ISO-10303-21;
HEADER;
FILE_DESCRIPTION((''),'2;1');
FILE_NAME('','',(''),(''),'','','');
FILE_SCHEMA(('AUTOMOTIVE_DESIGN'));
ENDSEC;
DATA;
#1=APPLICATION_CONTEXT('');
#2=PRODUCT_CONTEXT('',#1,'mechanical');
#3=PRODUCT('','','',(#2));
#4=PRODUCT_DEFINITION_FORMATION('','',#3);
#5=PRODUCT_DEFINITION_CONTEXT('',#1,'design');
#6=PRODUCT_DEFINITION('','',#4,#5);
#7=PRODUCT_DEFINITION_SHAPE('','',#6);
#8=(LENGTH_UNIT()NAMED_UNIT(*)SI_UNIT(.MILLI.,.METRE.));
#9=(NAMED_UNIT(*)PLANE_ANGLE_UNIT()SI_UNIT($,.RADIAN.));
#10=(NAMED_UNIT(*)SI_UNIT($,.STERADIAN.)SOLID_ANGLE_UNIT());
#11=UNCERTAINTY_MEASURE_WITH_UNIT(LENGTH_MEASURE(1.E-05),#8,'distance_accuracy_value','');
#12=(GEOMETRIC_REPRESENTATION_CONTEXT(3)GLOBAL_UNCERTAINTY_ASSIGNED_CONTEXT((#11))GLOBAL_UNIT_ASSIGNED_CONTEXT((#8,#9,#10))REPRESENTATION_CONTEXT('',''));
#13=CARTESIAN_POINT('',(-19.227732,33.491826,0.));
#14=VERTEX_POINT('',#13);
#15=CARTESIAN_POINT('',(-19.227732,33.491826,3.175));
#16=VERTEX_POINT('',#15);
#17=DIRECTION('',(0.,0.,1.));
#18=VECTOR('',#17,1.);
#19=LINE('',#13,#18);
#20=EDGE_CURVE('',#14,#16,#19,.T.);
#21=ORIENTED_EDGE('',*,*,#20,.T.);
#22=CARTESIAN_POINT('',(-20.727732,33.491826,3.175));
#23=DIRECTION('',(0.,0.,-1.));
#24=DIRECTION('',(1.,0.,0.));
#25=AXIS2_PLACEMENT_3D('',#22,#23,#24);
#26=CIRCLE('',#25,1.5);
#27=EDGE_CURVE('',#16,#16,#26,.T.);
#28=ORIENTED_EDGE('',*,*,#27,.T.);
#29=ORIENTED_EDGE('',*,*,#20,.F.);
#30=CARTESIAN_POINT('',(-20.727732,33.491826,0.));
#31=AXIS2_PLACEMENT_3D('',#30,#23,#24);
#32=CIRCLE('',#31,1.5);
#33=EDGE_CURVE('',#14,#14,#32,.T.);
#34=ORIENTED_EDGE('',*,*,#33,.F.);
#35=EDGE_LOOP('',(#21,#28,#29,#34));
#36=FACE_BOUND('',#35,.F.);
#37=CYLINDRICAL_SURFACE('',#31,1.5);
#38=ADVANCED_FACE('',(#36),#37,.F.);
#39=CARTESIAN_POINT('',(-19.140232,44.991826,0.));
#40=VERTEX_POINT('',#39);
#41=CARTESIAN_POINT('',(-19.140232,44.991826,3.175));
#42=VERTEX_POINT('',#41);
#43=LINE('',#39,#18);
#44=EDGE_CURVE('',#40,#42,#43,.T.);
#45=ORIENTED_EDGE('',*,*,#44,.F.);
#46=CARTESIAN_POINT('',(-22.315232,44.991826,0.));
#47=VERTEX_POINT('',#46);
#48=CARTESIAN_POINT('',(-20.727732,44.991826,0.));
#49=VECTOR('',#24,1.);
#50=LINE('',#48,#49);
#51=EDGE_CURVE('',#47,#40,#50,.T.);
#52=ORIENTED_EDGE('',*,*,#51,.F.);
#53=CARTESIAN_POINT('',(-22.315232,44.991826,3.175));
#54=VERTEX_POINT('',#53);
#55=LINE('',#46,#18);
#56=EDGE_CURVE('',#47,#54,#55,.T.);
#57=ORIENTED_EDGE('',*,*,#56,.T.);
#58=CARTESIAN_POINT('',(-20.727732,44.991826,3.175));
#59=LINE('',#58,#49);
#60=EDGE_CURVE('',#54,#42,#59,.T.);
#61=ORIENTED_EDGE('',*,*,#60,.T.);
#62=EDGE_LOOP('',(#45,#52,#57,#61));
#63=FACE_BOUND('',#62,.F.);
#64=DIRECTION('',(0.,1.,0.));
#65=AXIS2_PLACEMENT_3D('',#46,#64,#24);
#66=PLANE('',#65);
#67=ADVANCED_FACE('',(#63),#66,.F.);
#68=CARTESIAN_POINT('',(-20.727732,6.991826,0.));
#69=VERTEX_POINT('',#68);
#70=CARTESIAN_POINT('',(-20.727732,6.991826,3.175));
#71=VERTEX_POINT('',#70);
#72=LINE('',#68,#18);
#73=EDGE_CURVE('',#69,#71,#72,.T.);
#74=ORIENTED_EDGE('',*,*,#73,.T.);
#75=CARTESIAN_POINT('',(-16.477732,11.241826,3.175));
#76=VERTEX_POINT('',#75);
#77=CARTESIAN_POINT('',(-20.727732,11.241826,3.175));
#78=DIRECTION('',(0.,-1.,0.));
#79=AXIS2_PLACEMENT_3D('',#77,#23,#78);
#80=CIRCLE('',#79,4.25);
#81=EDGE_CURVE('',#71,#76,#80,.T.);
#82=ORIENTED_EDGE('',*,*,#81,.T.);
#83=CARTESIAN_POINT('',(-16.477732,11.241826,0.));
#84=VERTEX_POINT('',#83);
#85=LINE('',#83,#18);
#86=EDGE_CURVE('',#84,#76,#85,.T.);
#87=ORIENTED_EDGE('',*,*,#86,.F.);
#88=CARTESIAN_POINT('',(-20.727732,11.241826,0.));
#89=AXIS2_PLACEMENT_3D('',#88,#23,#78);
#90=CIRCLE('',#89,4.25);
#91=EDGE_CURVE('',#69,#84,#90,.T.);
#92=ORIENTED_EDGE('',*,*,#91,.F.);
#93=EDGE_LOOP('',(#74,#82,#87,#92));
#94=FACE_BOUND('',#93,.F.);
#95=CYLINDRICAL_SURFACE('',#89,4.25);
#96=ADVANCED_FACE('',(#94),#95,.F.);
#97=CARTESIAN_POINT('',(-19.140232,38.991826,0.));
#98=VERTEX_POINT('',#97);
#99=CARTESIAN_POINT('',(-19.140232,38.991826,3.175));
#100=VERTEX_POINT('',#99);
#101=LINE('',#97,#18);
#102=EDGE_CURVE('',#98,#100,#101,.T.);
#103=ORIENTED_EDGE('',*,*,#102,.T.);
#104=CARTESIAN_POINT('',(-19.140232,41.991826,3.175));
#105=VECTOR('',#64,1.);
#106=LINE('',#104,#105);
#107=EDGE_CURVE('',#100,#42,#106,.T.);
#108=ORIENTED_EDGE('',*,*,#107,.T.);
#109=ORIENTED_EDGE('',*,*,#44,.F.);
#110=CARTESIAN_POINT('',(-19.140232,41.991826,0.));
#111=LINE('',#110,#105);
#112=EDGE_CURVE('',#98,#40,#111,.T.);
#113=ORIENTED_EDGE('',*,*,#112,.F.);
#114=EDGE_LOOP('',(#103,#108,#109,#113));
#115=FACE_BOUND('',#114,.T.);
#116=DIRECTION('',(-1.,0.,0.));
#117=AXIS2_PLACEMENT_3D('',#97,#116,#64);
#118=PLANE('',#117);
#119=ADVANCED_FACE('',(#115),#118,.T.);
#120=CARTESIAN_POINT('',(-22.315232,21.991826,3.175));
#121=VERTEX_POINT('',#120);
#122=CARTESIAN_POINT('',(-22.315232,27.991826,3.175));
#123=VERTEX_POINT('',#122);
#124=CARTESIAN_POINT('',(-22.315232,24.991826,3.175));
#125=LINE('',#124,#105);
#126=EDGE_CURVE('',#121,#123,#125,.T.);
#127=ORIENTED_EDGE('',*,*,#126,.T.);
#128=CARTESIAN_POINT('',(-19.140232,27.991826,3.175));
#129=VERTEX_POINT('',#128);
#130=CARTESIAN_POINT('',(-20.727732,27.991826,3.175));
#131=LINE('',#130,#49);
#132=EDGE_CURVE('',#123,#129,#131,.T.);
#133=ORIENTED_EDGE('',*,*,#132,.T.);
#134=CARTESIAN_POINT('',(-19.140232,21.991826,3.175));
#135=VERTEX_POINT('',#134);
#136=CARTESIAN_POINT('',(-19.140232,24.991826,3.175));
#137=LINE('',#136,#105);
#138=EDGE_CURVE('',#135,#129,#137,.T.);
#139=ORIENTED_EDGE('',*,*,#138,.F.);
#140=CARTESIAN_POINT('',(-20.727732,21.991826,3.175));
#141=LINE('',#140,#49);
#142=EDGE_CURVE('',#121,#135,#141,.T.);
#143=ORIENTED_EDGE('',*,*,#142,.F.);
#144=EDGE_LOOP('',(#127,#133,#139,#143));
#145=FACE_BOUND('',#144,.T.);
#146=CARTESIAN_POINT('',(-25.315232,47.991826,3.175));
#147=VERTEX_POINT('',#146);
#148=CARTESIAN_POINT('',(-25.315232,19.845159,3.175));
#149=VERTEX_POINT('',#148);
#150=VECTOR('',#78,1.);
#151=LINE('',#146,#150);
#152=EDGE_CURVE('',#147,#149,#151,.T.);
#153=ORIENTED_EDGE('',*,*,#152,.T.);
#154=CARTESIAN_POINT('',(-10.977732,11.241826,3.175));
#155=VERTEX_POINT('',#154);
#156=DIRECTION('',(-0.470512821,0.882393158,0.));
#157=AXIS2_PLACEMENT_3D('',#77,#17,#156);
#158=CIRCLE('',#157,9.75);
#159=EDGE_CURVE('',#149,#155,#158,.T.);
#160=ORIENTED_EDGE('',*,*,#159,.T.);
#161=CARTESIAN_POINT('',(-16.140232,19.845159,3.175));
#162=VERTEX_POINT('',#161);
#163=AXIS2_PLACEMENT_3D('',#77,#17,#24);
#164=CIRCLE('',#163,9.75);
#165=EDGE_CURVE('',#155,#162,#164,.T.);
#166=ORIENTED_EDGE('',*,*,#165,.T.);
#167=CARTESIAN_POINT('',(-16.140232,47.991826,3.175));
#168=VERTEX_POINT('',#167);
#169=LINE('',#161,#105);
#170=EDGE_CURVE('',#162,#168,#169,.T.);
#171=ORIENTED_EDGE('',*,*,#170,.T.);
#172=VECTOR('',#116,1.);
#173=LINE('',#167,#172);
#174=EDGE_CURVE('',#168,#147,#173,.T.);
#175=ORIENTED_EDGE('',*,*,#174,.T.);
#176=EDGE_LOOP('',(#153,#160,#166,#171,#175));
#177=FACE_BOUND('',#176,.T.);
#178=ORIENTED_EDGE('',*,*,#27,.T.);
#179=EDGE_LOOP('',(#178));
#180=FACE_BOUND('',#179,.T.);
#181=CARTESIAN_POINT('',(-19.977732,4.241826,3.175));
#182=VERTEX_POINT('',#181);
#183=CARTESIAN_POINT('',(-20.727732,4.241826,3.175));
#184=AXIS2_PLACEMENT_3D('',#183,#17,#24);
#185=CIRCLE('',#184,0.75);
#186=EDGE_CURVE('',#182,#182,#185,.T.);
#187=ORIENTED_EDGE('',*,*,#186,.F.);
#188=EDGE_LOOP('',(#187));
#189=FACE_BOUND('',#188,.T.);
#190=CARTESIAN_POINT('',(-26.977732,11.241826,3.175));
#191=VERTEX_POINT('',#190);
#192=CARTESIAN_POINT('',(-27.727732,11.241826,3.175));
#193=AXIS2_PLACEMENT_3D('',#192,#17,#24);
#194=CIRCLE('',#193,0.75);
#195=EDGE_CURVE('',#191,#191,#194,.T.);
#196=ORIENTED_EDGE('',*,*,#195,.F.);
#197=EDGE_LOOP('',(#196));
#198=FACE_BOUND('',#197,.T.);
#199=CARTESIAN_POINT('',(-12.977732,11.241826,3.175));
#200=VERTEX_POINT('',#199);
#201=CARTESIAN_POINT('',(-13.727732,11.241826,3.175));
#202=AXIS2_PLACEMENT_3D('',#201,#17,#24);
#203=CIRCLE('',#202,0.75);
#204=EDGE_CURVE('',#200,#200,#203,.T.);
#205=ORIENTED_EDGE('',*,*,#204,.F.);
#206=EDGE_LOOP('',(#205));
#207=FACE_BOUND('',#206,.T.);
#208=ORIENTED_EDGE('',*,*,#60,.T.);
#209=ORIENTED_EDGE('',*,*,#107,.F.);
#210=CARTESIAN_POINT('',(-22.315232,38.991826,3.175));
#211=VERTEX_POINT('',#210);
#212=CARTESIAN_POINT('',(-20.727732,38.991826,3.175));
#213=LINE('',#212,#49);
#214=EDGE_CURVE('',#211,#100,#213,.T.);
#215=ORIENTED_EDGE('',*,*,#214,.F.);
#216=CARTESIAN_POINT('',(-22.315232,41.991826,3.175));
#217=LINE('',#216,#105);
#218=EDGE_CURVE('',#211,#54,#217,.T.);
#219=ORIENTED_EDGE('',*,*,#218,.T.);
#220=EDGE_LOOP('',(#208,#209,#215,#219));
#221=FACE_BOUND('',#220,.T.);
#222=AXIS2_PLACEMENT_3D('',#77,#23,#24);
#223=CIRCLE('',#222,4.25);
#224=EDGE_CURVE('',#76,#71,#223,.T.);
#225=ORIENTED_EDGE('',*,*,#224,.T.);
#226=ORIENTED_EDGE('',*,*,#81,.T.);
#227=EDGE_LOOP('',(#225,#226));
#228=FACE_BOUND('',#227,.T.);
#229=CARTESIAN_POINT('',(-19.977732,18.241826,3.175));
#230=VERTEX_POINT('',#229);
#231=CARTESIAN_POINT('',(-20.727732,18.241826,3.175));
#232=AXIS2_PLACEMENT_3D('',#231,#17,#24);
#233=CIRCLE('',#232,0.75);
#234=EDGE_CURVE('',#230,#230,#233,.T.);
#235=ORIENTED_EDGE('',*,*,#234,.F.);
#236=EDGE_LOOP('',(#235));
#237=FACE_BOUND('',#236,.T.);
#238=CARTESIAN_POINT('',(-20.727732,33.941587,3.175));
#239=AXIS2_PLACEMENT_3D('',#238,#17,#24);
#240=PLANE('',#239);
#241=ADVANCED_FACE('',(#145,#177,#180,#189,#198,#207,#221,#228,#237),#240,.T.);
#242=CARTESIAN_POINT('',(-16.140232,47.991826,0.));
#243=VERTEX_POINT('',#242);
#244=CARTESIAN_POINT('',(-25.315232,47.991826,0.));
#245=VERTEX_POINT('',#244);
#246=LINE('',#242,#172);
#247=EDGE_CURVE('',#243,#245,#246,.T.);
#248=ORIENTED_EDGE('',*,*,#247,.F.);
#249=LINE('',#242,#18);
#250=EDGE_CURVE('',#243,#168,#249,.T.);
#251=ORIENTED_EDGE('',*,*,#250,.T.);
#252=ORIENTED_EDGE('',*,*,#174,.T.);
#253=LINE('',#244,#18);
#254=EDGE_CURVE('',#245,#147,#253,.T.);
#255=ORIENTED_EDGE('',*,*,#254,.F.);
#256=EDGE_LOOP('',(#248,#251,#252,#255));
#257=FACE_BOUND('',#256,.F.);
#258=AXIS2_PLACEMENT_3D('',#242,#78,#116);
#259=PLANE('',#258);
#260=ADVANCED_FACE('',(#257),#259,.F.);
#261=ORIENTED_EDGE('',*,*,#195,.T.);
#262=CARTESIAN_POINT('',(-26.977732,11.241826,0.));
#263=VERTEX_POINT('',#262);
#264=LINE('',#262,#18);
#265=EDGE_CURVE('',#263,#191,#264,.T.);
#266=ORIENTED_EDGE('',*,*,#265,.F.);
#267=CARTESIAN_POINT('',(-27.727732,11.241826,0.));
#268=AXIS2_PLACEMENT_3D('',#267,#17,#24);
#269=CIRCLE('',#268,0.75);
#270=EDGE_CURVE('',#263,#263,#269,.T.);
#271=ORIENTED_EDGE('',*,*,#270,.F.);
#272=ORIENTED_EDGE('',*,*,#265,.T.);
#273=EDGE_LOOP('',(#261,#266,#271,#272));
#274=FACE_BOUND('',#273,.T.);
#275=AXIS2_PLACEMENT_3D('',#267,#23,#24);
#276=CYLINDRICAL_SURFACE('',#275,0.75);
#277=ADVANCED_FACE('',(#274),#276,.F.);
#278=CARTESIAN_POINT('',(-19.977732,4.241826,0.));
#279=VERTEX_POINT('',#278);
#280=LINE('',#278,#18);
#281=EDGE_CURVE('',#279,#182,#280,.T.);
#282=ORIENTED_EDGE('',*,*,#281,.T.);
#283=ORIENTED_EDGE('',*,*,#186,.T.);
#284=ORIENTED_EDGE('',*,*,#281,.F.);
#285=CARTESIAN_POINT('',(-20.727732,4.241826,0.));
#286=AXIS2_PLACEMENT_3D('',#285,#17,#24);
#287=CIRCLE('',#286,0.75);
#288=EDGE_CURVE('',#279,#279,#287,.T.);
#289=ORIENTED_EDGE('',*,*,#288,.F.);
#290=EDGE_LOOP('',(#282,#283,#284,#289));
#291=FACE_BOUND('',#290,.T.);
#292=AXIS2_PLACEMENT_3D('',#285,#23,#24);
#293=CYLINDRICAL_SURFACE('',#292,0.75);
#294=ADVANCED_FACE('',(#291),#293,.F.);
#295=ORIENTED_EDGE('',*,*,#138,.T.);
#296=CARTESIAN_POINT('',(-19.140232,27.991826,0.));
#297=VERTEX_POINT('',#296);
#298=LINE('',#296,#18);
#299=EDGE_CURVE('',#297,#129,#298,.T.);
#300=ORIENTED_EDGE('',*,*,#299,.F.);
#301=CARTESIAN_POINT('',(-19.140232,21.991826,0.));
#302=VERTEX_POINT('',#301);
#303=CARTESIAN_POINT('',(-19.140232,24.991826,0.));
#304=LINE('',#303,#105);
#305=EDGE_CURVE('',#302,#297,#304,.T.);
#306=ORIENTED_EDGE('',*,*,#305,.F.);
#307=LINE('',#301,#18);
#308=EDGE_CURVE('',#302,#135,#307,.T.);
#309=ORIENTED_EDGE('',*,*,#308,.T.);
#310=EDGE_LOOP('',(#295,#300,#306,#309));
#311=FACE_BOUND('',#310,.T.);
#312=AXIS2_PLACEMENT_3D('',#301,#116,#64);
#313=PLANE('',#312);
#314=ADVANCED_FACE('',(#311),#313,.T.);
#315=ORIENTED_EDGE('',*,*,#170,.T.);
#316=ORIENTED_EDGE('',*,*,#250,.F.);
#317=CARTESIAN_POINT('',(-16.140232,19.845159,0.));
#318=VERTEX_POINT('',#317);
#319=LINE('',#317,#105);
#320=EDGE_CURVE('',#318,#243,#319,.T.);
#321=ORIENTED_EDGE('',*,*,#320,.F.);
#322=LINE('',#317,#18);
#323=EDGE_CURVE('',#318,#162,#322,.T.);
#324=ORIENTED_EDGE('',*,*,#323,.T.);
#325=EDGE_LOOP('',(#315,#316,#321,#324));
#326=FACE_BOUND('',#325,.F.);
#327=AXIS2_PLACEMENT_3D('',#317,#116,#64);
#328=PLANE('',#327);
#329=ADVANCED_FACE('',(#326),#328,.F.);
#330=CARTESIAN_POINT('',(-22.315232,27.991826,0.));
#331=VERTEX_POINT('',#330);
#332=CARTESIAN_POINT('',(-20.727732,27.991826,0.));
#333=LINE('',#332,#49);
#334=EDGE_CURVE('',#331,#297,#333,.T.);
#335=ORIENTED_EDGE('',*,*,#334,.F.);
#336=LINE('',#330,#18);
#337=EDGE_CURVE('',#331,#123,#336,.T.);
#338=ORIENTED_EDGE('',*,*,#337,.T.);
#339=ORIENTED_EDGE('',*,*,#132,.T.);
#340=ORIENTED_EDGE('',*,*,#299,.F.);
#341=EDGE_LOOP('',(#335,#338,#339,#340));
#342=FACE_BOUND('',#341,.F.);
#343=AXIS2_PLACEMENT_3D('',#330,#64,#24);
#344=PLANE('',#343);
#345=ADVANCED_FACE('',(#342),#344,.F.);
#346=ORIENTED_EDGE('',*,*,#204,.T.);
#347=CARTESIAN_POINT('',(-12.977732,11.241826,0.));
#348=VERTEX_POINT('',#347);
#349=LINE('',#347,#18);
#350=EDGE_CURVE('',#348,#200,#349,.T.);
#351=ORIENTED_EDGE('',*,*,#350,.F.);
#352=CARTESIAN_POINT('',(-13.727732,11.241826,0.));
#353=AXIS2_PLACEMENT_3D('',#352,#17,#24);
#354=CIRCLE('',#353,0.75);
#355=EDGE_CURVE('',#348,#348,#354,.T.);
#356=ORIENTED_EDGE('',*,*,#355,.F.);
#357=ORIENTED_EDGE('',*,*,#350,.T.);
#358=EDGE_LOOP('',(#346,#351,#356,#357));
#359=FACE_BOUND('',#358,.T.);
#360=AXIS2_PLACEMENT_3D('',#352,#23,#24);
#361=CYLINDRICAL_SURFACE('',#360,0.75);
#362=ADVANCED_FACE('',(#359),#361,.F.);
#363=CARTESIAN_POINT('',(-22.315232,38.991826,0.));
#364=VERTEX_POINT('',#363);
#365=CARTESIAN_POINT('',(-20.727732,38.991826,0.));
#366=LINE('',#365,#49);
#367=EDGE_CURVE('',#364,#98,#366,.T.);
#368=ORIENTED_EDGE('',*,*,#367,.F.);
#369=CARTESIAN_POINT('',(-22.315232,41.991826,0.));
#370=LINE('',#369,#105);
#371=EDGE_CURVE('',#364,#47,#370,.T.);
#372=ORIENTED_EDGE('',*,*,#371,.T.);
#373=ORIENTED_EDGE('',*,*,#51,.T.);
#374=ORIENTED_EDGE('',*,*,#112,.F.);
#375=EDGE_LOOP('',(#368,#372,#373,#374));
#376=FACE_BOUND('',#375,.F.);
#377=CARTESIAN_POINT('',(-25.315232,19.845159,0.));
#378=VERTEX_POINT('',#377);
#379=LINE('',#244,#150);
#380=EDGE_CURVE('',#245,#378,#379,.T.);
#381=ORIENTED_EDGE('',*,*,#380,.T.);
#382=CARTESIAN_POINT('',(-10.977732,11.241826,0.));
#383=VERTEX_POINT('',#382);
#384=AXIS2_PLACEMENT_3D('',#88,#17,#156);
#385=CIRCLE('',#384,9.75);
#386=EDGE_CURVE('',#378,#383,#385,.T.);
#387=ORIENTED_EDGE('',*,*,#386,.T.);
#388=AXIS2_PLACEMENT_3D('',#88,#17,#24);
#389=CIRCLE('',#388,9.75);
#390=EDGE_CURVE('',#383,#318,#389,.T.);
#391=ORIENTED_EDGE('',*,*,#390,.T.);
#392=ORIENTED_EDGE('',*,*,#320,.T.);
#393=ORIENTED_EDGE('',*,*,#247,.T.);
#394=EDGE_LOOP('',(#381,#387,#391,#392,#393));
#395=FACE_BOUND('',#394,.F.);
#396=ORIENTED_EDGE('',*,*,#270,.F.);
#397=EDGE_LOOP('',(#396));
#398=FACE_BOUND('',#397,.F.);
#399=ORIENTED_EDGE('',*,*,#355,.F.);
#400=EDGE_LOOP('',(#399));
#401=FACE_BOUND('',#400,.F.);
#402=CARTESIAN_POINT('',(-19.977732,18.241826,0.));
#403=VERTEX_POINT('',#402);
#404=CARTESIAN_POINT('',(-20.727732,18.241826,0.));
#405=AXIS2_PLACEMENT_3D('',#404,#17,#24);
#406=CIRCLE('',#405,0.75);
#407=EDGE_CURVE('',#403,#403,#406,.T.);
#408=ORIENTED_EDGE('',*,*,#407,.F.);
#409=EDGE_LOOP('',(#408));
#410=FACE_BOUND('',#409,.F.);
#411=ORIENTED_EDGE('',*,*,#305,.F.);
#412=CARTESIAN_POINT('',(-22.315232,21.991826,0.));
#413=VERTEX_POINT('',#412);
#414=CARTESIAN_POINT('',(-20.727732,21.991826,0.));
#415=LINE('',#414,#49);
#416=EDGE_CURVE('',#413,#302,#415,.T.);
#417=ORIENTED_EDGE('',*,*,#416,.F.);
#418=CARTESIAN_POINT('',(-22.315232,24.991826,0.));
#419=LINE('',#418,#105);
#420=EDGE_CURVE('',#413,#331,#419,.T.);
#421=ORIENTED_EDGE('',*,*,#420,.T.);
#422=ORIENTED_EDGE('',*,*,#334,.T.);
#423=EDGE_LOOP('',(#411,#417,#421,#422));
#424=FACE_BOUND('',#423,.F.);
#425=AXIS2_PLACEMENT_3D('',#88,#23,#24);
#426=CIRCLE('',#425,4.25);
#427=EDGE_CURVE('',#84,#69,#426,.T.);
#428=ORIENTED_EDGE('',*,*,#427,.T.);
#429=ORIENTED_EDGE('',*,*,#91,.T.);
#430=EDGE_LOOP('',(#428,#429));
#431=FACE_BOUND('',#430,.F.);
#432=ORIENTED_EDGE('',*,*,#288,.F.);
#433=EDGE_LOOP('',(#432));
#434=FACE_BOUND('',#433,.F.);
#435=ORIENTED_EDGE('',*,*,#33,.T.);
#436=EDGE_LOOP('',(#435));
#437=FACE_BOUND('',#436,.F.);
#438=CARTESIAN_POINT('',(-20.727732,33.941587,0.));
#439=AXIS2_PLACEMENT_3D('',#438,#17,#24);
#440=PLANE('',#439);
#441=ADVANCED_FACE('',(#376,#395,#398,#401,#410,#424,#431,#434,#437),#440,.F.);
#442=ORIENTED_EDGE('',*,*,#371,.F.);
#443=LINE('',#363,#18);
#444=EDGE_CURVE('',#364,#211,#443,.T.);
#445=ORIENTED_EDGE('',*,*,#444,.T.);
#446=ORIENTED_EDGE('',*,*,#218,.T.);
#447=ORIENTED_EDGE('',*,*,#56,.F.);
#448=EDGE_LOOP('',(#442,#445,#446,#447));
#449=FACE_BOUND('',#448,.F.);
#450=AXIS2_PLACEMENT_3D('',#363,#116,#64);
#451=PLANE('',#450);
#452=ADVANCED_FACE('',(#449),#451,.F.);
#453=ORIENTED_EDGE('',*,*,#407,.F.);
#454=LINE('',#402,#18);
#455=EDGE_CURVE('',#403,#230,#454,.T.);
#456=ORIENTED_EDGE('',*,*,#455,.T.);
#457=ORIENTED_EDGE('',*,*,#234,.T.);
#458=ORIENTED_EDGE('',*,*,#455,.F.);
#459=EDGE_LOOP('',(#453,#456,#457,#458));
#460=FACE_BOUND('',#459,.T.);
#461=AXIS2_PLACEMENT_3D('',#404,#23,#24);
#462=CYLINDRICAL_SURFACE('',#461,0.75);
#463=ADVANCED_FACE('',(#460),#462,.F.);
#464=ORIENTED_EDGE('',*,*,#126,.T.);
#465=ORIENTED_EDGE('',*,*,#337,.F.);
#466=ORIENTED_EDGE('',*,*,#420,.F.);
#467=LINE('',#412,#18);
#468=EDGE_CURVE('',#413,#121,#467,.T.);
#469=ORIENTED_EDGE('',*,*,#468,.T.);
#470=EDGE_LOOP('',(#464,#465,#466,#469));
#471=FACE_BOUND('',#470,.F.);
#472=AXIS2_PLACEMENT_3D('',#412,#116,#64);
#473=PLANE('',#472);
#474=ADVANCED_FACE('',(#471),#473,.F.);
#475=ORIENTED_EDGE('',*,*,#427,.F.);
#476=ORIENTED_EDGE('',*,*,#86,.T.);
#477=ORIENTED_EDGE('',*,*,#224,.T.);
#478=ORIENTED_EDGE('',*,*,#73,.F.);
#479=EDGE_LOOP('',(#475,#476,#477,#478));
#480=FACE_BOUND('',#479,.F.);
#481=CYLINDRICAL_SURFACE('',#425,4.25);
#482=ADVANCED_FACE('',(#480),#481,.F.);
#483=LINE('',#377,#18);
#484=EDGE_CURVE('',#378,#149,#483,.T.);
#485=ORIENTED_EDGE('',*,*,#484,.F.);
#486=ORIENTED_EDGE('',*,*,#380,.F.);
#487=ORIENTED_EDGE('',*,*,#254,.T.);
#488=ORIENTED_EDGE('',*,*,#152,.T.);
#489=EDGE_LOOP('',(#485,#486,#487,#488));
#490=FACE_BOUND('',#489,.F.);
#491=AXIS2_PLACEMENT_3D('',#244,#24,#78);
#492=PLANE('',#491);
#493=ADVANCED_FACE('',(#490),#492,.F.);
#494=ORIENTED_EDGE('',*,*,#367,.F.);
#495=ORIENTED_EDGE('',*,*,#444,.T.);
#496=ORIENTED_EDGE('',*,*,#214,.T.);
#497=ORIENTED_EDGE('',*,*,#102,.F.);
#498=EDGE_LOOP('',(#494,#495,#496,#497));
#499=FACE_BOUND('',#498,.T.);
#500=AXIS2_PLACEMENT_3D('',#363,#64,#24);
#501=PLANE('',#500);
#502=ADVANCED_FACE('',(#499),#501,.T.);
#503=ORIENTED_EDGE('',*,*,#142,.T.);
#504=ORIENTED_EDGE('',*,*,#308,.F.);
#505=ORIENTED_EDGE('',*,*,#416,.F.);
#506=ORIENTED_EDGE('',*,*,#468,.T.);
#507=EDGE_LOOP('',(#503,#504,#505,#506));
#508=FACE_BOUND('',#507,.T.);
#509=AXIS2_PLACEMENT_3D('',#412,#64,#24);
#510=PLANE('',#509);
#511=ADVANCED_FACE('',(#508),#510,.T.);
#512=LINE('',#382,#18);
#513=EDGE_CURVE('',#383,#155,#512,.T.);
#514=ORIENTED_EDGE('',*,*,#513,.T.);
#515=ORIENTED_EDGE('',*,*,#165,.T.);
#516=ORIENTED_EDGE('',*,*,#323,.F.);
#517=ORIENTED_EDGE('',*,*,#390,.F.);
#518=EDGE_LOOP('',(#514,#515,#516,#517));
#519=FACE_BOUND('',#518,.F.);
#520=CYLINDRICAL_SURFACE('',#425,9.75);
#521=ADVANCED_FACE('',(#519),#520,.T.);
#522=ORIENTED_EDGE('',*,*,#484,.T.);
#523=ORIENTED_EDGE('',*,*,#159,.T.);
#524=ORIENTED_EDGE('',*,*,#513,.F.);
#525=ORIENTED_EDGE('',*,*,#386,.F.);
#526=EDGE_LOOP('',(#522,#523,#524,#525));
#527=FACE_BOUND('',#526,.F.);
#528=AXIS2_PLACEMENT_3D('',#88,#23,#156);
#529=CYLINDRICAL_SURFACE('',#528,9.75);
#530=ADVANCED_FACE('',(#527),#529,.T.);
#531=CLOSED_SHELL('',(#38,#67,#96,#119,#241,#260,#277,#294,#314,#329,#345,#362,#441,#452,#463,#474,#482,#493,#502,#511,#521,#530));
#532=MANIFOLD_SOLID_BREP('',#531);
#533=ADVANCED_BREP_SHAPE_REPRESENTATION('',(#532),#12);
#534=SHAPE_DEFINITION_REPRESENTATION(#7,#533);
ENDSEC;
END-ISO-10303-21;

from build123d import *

# Parameters (mm, degrees)
F0_W     = 3.175
F0_H     = 6
F0_R     = 0.75
F1_DEPTH = 3.175


# Not quite as in the source:
# - a length typed as a fraction of an inch, garbled in the dataset ("3 / 203.2 mm" for 3/8 in), is restored


with BuildPart() as f1:
    # F0 (on Top) → F1 (new body)
    with BuildSketch(Plane.XY):
        with BuildLine():
            ThreePointArc((-25.3152321216, 19.8451589555), (-20.7277321216, 20.9918256626), (-16.1402321216, 19.8451589555))
            Line((-16.1402321216, 19.8451589555), (-16.1402321216, 47.9918256626))
            Line((-16.1402321216, 47.9918256626), (-25.3152321216, 47.9918256626))
            Line((-25.3152321216, 47.9918256626), (-25.3152321216, 19.8451589555))
        make_face()
        with Locations((-20.7277321216, 24.9918256626)):
            Rectangle(F0_W, F0_H, mode=Mode.SUBTRACT)
        with BuildLine():
            ThreePointArc((-22.2277321216, 33.4918256626), (-20.7277321216, 34.9918256626), (-19.2277321216, 33.4918256626))
            ThreePointArc((-19.2277321216, 33.4918256626), (-20.7277321216, 31.9918256626), (-22.2277321216, 33.4918256626))
        make_face(mode=Mode.SUBTRACT)
        with Locations((-20.7277321216, 41.9918256626)):
            Rectangle(F0_W, F0_H, mode=Mode.SUBTRACT)
        with BuildLine():
            ThreePointArc((-25.3152321216, 19.8451589555), (-25.744423013, 2.8814840128), (-10.9777321216, 11.2418256626))
            ThreePointArc((-10.9777321216, 11.2418256626), (-12.3673904719, 16.258516554), (-16.1402321216, 19.8451589555))
            ThreePointArc((-16.1402321216, 19.8451589555), (-20.7277321216, 20.9918256626), (-25.3152321216, 19.8451589555))
        make_face()
        with Locations((-27.7277321216, 11.2418256626)):
            Circle(F0_R, mode=Mode.SUBTRACT)
        with Locations((-20.7277321216, 4.2418256626)):
            Circle(F0_R, mode=Mode.SUBTRACT)
        with BuildLine():
            ThreePointArc((-20.7277321216, 6.9918256626), (-23.7329359416, 14.2470294826), (-16.4777321216, 11.2418256626))
            ThreePointArc((-16.4777321216, 11.2418256626), (-17.7225283015, 8.2366218425), (-20.7277321216, 6.9918256626))
        make_face(mode=Mode.SUBTRACT)
        with Locations((-13.7277321216, 11.2418256626)):
            Circle(F0_R, mode=Mode.SUBTRACT)
        with Locations((-20.7277321216, 18.2418256626)):
            Circle(F0_R, mode=Mode.SUBTRACT)
    extrude(amount=F1_DEPTH)


solid = f1.part
